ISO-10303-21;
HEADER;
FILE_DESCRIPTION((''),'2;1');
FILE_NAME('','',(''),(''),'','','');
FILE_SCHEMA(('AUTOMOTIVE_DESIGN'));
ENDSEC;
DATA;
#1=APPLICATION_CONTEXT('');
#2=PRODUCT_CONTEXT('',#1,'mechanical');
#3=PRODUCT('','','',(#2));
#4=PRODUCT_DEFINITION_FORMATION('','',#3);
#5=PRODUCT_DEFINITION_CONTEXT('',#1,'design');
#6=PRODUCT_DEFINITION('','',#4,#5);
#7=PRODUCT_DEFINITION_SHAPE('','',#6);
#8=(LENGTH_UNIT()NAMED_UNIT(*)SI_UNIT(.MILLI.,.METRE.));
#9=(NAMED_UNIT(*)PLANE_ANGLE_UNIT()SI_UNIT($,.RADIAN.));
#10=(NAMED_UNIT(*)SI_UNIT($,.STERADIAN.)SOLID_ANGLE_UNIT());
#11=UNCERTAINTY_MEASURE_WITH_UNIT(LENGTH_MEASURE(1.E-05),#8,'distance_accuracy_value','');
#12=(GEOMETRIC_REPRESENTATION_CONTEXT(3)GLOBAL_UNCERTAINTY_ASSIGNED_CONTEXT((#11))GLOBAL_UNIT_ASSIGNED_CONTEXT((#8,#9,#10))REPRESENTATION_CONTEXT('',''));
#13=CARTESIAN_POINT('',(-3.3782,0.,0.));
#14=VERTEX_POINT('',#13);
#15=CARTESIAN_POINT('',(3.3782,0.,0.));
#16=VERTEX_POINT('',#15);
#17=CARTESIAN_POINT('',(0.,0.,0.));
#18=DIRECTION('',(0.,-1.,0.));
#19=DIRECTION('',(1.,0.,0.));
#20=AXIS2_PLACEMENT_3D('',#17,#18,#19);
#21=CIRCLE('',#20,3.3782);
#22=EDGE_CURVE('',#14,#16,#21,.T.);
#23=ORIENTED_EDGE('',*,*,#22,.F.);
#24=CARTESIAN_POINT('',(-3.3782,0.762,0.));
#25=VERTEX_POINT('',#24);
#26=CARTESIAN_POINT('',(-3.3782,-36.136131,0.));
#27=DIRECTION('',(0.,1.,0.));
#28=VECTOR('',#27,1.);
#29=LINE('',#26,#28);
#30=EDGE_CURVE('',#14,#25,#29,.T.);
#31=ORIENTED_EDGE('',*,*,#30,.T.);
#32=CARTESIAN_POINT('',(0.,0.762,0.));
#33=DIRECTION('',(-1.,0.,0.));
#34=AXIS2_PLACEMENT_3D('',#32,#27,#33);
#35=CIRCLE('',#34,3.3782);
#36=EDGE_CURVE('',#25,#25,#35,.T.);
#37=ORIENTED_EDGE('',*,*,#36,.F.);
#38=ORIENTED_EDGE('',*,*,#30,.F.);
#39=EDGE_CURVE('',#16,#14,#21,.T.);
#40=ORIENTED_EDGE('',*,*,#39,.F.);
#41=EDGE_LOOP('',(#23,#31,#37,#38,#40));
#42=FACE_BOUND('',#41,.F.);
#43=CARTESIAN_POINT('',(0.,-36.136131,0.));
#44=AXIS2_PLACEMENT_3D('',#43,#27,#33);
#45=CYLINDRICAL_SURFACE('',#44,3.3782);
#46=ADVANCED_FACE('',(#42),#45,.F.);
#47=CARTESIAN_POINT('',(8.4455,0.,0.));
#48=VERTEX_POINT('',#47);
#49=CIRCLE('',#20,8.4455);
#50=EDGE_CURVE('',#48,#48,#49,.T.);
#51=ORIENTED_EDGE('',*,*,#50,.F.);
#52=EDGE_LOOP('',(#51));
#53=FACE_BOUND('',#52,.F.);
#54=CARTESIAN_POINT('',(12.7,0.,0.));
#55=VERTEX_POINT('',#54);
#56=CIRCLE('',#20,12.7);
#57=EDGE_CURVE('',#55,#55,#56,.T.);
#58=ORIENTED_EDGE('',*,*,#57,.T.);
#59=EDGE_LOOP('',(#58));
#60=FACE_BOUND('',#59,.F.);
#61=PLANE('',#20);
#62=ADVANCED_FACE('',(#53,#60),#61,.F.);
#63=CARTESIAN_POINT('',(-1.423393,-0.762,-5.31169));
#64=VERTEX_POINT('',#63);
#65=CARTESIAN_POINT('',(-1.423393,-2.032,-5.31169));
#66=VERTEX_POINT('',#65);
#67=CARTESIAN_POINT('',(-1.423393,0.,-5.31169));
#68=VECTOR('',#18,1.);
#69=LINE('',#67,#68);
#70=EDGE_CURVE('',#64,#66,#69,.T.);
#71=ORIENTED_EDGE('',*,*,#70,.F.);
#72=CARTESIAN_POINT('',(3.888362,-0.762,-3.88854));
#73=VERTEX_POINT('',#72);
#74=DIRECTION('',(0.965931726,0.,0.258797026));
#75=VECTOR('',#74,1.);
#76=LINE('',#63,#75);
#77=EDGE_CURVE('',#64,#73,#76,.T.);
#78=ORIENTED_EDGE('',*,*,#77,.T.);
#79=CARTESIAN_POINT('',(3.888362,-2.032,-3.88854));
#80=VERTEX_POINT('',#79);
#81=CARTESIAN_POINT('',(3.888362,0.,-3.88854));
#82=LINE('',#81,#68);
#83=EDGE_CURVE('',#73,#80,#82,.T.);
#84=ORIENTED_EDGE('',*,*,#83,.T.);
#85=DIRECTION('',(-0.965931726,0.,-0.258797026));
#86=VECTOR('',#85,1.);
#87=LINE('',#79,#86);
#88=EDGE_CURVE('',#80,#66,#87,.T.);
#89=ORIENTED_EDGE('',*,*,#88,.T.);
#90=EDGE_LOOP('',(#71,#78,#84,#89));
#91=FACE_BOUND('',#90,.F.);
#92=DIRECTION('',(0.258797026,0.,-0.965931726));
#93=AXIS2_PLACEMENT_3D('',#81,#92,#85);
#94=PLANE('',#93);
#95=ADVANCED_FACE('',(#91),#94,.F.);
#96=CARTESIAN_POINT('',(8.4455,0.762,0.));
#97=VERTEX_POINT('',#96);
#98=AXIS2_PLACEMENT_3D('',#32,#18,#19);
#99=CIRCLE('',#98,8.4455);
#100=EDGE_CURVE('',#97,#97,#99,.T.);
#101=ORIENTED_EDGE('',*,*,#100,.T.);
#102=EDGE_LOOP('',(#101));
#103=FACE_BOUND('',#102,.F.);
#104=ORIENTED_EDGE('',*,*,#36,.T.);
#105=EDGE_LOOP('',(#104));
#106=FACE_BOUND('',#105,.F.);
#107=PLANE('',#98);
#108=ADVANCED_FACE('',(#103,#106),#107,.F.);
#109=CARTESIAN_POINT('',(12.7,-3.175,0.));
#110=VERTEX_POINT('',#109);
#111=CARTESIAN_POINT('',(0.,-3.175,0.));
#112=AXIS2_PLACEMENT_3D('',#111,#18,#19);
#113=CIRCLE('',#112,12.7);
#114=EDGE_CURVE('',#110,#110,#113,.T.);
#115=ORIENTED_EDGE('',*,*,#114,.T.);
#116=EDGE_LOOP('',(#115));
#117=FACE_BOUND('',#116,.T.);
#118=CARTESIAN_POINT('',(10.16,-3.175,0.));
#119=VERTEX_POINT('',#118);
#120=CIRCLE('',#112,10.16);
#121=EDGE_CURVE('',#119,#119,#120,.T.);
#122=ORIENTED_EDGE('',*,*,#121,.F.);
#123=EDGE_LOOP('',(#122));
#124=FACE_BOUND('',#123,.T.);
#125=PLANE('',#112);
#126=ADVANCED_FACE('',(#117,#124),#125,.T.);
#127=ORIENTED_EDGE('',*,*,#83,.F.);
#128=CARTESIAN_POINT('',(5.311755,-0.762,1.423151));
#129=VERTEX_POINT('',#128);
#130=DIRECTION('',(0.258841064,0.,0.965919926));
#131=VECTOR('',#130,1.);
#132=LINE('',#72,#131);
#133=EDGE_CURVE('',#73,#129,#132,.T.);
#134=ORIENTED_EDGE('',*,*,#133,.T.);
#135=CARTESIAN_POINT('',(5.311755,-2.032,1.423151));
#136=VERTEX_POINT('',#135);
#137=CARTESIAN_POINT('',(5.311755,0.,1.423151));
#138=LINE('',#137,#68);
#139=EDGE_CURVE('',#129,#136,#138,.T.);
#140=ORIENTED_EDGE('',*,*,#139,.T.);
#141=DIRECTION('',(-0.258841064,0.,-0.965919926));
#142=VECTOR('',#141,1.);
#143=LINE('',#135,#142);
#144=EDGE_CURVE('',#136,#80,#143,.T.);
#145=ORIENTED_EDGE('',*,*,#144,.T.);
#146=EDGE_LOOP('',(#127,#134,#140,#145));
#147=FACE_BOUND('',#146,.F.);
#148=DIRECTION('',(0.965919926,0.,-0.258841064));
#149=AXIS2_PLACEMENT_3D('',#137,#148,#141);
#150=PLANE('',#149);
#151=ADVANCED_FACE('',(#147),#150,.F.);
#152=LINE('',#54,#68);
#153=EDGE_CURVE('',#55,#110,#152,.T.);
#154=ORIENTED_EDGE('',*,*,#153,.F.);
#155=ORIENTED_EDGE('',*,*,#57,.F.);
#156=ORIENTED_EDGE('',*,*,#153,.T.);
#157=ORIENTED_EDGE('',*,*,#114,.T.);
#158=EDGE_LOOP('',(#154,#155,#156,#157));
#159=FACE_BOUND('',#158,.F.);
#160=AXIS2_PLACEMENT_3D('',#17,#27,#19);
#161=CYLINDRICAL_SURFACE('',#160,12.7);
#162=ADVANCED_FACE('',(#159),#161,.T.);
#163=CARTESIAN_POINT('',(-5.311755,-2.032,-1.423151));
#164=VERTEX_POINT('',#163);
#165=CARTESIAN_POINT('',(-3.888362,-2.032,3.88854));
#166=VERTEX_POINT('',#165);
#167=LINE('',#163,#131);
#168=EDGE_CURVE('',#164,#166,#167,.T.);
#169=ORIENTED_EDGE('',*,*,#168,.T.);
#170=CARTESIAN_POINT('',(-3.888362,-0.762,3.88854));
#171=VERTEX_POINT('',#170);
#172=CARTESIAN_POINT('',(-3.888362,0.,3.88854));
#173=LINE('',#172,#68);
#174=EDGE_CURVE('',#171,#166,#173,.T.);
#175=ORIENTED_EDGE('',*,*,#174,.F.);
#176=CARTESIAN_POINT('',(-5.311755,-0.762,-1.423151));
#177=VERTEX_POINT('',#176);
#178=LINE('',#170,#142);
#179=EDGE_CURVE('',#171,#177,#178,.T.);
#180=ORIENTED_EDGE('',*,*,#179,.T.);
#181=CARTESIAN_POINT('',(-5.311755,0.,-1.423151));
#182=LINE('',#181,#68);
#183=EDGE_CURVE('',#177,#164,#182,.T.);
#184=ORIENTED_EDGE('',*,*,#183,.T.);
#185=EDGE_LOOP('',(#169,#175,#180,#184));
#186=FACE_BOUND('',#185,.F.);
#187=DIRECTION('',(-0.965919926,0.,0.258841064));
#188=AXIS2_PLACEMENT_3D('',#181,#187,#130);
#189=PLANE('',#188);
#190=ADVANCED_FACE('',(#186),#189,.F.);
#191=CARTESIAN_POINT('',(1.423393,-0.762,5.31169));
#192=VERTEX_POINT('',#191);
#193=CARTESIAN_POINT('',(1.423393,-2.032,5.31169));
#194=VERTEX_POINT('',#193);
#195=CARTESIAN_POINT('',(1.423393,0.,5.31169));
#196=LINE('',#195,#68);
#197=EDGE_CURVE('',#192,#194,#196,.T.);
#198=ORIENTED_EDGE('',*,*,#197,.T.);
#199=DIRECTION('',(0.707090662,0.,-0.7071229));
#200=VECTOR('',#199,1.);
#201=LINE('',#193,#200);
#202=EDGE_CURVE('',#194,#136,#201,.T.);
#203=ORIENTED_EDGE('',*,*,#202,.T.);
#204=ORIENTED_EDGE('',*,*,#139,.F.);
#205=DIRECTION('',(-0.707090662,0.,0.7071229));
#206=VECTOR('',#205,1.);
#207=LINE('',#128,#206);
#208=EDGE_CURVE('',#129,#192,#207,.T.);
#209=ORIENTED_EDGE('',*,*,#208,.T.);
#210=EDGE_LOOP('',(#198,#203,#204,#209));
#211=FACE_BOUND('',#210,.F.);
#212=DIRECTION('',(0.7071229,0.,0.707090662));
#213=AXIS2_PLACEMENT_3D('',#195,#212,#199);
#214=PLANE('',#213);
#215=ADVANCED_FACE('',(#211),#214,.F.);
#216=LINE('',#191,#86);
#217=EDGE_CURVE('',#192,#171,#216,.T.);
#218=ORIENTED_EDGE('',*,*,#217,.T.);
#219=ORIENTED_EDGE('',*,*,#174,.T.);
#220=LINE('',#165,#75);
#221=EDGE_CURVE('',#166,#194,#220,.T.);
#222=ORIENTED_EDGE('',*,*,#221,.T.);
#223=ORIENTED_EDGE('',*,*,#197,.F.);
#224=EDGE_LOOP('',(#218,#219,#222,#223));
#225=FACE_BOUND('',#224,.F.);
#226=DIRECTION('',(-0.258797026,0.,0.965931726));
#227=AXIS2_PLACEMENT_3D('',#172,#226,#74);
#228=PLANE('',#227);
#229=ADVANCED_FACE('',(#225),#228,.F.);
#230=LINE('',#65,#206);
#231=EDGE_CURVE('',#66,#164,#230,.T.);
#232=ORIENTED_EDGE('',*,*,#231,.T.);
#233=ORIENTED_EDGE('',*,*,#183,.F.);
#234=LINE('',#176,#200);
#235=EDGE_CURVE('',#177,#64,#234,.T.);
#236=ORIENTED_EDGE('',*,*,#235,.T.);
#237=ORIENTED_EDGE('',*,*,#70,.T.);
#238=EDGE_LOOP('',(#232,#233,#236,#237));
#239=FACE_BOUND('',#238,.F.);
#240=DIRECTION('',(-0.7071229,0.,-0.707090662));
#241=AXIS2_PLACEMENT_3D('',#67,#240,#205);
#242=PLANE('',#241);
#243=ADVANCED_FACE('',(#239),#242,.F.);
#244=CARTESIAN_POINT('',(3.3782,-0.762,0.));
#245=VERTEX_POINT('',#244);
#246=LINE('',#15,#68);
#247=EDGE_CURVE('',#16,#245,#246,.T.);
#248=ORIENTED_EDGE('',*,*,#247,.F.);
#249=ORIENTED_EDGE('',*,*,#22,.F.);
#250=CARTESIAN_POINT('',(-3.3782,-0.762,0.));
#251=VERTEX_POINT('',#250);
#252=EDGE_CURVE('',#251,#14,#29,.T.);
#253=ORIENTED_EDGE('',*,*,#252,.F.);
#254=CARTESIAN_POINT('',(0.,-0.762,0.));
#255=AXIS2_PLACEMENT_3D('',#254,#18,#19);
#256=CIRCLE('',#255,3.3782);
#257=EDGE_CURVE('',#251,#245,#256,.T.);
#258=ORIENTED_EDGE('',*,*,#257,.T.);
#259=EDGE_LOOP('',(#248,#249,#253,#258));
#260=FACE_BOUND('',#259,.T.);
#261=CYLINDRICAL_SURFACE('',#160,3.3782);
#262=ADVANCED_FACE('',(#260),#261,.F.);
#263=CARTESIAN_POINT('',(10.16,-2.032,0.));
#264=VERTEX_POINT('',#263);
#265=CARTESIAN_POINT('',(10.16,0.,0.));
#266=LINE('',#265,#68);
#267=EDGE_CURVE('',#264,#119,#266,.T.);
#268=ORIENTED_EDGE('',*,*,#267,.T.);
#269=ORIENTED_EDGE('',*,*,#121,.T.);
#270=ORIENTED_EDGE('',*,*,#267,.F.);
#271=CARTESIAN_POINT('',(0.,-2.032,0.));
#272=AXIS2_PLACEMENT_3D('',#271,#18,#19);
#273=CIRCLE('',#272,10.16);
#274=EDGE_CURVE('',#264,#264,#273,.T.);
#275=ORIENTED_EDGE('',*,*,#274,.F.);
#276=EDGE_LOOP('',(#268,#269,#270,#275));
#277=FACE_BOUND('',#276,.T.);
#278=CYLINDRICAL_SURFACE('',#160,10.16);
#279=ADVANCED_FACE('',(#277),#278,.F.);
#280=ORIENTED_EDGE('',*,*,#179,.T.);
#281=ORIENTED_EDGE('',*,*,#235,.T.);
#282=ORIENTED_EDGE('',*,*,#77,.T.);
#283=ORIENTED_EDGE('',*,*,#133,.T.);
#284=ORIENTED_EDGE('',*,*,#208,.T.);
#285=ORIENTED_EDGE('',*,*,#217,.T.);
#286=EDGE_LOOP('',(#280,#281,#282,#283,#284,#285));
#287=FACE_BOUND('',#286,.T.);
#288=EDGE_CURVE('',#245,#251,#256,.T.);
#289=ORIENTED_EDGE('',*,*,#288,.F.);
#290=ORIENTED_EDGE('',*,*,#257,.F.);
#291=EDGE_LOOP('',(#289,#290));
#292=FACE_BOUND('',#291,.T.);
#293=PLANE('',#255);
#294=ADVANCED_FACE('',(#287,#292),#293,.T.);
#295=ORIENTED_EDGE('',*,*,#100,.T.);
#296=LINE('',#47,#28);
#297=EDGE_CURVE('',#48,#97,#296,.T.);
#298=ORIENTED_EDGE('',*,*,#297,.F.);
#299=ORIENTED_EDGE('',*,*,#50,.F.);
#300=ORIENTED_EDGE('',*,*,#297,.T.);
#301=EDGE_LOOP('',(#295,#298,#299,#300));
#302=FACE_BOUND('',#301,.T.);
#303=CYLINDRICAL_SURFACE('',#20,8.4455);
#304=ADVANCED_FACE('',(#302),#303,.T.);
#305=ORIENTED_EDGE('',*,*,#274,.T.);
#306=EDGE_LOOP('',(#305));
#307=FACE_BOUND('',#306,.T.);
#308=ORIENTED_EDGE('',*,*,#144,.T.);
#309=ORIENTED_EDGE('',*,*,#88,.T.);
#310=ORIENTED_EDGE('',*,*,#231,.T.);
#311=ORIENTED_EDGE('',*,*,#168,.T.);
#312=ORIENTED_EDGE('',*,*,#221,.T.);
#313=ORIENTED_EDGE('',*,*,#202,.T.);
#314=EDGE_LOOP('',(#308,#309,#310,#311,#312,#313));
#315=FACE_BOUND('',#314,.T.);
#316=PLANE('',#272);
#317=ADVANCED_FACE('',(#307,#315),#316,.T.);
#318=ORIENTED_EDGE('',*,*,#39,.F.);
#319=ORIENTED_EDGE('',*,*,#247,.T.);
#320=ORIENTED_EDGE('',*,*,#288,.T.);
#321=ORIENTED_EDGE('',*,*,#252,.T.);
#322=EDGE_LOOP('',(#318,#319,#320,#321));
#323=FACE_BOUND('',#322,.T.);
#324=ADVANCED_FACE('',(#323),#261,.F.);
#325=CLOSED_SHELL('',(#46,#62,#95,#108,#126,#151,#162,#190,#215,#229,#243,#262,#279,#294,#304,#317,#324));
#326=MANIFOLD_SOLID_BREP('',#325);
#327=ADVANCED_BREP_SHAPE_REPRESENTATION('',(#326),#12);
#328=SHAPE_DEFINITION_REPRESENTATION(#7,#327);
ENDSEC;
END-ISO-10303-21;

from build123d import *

# Parameters (mm, degrees)
F0_R     = 12.7
F0_R_2   = 10.16
F1_DEPTH = 3.175
F2_DEPTH = 2.032
F0_R_3   = 3.3782
F3_DEPTH = 0.762
F4_R     = 8.4455
F5_DEPTH = 0.762
F7_D     = 6.7564


# Not quite as in the source:
# - the program builds the solid bodies; features that only make, move or delete a surface that nothing else refers to are left out


with BuildPart() as f1:
    # F0 (on Front) → F1 (new body)
    with BuildSketch(Plane.XZ):
        Circle(F0_R)
        Circle(F0_R_2, mode=Mode.SUBTRACT)
    extrude(amount=F1_DEPTH)

    # F0 (on Front) → F2 (join)
    with BuildSketch(Plane.XZ):
        Circle(F0_R_2)
        Polygon((1.4233928974, 5.3116902648), (5.3117551551, 1.4231507237), (3.8883622577, -3.8885395411), (-1.4233928974, -5.3116902648), (-5.3117551551, -1.4231507237), (-3.8883622577, 3.8885395411), align=None, mode=Mode.SUBTRACT)
    extrude(amount=F2_DEPTH)

    # F0 (on Front) → F3 (join)
    with BuildSketch(Plane.XZ):
        Polygon((3.8883622577, -3.8885395411), (5.3117551551, 1.4231507237), (1.4233928974, 5.3116902648), (-3.8883622577, 3.8885395411), (-5.3117551551, -1.4231507237), (-1.4233928974, -5.3116902648), align=None)
        Circle(F0_R_3, mode=Mode.SUBTRACT)
    extrude(amount=F3_DEPTH)

    # F4 (on face) → F5 (join)
    with BuildSketch(Plane.XZ):
        Circle(F4_R)
    extrude(amount=-F5_DEPTH)

    # F7 (through all)
    with Locations(Plane.XZ):
        with Locations((0, 0)):
            Hole(F7_D / 2)


solid = f1.part
